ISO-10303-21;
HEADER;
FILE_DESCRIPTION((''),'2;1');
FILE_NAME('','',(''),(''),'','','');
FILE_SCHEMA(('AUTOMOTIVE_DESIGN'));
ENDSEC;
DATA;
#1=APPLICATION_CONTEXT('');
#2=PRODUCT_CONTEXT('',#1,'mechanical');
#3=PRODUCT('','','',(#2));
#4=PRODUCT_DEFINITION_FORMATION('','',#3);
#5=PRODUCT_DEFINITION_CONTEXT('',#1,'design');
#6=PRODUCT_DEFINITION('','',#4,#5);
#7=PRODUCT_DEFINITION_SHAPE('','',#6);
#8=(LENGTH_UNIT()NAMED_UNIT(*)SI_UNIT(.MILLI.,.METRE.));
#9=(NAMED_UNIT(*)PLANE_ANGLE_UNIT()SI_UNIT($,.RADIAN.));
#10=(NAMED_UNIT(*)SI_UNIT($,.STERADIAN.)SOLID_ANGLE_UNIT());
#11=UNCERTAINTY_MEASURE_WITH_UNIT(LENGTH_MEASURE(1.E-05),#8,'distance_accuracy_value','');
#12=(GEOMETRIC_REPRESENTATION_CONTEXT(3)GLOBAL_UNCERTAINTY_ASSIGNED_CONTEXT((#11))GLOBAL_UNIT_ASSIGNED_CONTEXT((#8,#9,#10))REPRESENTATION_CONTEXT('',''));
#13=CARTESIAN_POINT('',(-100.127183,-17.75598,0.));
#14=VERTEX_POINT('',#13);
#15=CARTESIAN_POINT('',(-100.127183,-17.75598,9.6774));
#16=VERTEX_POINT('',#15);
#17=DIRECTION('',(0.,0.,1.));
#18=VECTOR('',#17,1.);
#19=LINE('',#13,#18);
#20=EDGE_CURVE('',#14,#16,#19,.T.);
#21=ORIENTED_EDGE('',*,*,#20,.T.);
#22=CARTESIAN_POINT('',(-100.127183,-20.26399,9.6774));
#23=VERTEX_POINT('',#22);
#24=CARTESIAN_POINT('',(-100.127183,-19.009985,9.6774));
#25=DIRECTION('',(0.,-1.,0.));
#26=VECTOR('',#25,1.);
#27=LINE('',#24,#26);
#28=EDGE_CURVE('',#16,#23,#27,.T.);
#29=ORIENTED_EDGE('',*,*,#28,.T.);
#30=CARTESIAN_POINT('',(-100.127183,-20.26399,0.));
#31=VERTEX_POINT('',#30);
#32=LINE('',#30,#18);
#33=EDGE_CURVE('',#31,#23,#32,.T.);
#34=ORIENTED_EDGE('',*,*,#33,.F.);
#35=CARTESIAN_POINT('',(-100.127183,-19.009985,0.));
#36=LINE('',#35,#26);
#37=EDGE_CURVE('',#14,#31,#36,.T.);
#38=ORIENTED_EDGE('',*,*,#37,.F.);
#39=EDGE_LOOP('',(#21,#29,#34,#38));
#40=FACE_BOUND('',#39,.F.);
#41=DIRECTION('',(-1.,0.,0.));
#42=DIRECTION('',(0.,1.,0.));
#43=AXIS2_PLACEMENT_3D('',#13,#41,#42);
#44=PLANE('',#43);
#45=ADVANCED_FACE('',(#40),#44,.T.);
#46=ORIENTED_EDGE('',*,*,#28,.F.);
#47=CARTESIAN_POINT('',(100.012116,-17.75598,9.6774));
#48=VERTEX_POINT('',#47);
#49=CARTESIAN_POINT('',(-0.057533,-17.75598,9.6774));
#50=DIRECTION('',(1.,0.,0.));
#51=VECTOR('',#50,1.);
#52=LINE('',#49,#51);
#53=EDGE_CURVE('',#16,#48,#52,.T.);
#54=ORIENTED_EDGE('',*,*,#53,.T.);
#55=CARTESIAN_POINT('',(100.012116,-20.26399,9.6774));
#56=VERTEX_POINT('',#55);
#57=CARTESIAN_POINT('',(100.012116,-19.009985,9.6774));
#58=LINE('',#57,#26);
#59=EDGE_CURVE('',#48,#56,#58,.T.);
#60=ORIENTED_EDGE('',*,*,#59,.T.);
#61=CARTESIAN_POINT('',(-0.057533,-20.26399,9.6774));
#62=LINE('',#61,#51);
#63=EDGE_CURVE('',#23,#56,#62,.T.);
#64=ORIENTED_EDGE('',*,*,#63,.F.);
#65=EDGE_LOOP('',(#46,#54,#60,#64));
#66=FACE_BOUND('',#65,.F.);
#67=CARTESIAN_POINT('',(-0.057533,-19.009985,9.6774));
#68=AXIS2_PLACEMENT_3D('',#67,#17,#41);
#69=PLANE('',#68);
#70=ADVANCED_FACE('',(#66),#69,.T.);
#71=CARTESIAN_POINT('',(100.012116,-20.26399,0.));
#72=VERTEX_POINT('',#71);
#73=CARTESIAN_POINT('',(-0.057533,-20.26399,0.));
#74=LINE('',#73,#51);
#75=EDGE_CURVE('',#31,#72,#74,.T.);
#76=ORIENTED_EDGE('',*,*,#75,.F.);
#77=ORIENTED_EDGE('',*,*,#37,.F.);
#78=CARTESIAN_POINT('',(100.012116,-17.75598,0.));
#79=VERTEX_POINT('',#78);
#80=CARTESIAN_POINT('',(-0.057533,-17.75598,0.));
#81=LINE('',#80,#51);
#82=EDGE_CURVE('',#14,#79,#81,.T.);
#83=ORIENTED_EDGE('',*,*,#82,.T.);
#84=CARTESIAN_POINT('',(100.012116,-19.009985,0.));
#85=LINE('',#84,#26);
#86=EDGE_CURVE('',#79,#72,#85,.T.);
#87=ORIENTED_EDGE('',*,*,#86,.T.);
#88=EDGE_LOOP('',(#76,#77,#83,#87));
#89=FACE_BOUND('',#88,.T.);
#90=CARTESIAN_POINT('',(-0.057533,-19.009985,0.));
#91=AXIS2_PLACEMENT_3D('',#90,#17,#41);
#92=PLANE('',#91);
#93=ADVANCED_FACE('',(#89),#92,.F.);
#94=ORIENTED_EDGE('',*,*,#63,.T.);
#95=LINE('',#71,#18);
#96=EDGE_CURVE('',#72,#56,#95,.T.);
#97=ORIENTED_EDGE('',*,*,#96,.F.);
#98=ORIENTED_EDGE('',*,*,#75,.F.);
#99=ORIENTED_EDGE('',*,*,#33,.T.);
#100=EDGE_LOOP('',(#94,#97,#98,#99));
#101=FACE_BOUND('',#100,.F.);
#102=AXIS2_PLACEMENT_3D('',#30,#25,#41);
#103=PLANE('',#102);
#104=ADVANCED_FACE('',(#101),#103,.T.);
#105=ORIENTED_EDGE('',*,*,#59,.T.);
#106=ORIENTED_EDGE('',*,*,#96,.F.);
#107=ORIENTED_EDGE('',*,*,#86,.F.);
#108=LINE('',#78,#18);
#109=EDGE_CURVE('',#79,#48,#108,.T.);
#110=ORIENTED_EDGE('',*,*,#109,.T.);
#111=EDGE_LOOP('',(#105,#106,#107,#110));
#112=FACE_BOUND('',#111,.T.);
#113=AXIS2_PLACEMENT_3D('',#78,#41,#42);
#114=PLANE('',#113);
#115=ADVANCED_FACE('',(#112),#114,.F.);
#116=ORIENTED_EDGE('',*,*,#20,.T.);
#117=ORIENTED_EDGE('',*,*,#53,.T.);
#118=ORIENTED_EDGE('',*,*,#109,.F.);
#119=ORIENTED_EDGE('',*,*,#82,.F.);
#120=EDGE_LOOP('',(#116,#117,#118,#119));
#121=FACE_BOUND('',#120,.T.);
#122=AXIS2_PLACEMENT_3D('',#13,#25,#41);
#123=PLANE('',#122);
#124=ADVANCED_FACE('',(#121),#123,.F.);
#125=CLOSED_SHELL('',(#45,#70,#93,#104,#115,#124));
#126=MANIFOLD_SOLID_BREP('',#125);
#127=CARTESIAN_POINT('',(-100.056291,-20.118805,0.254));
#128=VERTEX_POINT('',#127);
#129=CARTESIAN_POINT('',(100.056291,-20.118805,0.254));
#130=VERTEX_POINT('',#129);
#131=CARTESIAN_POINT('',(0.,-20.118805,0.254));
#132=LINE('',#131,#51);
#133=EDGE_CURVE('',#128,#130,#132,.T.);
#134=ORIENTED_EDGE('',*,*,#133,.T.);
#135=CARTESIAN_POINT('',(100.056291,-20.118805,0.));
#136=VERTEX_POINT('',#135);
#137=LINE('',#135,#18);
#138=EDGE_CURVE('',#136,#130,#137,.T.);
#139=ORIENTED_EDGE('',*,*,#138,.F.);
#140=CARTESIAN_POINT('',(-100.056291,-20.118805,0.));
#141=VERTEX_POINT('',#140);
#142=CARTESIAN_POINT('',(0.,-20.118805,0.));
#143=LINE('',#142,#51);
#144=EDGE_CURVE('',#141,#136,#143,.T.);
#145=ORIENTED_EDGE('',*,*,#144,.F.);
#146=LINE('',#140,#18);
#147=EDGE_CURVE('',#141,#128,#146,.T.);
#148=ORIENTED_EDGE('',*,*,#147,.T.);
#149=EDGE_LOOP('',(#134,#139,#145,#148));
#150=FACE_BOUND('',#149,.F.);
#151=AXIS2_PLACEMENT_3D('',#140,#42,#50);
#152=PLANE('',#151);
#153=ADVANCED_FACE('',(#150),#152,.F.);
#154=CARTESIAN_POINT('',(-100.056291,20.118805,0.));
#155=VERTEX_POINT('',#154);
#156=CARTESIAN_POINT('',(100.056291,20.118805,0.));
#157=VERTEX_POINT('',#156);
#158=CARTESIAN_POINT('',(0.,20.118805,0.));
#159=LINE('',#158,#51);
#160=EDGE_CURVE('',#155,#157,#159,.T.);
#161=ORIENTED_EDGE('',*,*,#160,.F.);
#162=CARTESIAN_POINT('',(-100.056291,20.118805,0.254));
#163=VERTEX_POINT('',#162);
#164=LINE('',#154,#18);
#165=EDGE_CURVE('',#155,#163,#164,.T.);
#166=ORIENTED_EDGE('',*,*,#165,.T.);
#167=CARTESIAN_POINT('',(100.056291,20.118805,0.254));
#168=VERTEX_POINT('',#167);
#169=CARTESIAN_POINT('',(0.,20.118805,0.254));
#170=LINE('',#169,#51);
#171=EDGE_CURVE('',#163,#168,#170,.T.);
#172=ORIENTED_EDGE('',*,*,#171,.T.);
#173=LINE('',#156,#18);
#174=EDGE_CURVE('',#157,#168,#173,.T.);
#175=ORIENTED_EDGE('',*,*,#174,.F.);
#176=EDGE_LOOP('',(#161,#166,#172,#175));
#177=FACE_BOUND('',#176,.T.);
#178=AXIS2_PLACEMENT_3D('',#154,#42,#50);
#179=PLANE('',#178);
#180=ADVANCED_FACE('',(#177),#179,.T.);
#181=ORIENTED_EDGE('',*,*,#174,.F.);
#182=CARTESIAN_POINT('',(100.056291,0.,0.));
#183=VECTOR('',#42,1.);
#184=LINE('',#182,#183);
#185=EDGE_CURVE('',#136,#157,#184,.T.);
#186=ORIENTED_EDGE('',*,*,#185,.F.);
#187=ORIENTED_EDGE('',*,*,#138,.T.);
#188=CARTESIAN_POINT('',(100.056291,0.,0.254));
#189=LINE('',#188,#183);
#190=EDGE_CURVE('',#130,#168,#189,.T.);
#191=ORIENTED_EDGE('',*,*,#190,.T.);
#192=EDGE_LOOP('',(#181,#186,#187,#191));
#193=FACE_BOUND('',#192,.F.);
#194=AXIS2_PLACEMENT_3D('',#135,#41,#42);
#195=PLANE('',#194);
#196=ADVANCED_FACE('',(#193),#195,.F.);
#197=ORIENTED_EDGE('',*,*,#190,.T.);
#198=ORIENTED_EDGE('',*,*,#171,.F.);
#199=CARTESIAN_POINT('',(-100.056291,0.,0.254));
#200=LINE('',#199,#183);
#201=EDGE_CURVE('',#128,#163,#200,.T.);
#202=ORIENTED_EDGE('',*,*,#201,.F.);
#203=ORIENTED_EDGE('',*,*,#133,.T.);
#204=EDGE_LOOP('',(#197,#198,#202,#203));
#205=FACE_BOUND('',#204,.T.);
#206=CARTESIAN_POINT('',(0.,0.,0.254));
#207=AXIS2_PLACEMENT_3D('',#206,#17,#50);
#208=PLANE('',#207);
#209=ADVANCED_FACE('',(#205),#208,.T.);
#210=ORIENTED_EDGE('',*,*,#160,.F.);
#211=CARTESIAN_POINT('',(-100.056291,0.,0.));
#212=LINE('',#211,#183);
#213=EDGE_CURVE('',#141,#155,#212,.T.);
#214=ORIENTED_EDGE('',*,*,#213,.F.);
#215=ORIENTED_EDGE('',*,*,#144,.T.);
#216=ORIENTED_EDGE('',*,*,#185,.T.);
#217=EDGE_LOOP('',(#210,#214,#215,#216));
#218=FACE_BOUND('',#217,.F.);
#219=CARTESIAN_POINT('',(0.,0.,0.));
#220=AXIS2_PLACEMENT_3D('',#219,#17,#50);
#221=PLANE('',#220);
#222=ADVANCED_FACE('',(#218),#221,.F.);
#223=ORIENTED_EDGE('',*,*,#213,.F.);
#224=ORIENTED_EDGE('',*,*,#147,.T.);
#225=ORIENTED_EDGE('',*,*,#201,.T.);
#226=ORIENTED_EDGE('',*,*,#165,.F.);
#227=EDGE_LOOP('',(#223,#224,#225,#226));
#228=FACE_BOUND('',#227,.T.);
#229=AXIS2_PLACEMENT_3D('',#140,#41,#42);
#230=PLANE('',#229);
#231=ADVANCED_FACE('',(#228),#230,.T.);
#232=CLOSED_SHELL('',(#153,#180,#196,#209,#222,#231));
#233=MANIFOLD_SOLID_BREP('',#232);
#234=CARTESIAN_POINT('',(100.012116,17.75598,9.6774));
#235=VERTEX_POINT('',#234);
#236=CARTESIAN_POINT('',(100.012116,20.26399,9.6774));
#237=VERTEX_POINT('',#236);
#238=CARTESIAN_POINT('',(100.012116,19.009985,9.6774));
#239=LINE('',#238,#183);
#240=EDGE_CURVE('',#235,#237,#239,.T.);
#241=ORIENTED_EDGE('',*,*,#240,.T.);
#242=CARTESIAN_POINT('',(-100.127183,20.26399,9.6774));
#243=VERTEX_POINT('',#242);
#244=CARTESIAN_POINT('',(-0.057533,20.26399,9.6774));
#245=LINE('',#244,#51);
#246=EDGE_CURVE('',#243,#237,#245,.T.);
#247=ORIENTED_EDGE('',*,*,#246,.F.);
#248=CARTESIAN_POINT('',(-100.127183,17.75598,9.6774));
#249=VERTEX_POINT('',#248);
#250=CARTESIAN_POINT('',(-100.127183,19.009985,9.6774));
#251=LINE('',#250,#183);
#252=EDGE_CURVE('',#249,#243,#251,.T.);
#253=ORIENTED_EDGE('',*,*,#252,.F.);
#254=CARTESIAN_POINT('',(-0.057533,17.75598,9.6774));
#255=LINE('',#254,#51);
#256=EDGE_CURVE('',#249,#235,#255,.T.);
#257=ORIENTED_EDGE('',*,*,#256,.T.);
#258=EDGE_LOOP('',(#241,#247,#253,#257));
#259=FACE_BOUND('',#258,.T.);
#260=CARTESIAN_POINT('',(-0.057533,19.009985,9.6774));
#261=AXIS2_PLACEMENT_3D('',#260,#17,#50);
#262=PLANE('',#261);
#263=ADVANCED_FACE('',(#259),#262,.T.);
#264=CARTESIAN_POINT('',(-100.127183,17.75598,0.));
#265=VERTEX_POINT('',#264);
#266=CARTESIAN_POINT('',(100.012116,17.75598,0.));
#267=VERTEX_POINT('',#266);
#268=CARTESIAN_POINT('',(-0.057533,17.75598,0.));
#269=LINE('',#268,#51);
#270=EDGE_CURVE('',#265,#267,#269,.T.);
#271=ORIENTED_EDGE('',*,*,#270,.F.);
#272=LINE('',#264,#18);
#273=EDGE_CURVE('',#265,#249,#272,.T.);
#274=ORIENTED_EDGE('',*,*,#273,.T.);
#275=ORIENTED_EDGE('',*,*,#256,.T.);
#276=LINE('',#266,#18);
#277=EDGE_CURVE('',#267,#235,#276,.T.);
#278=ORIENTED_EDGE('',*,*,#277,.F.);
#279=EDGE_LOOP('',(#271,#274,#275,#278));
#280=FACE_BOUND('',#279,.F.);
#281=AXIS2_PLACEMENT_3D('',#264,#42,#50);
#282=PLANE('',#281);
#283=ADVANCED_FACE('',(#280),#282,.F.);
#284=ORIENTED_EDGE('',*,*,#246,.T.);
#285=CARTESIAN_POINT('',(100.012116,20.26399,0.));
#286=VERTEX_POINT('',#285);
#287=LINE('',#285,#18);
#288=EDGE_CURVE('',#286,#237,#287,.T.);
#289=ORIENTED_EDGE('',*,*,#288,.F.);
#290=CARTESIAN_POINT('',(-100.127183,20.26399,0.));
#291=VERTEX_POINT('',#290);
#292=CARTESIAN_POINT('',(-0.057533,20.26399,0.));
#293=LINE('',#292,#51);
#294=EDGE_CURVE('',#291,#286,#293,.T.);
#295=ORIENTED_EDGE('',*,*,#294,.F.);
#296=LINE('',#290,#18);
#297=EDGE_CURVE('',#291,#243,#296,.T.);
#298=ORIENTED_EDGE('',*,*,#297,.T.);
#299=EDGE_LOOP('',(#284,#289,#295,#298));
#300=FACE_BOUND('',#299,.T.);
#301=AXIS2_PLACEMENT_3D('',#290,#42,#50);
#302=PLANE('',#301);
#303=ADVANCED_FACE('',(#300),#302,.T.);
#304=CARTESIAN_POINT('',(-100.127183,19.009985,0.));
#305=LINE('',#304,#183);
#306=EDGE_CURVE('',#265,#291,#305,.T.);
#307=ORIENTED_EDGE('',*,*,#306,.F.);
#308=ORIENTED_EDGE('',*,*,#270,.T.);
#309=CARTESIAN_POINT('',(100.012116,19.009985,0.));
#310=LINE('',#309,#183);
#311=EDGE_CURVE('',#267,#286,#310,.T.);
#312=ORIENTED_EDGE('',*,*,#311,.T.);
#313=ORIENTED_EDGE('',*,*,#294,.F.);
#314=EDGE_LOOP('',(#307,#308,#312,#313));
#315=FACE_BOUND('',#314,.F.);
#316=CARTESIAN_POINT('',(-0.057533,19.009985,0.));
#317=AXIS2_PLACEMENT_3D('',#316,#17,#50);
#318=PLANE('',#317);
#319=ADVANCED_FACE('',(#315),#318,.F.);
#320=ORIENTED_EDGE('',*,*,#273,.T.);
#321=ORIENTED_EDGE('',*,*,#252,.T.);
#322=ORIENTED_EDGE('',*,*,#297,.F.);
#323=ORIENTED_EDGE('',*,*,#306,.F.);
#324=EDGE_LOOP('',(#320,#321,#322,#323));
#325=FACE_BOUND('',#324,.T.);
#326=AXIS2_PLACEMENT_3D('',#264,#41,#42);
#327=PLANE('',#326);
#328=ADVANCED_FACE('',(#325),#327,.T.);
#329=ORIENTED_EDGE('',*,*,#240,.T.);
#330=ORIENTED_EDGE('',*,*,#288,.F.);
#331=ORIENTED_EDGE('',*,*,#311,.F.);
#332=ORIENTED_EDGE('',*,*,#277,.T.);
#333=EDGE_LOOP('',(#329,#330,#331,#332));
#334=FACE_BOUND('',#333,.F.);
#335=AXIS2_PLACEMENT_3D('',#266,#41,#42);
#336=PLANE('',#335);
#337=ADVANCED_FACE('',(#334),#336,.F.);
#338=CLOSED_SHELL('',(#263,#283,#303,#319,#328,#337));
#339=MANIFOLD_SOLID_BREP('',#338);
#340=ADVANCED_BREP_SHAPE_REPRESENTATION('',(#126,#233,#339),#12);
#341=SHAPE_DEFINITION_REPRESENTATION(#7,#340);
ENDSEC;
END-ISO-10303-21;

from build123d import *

# Parameters (mm, degrees)
F1_W     = 200.1392990351
F1_H     = 2.5080107152
F2_DEPTH = 9.6774
F0_W     = 200.1125812531
F0_H     = 40.237609297
F3_DEPTH = 0.254


# Not quite as in the source:
# - a feature names something its author has since deleted; it is built from what else it names


with BuildPart() as f2:
    # F1 (on Top) → F2 (new body)
    with BuildSketch(Plane.XY):
        with Locations((-0.0575333834, 19.0099850297)):
            Rectangle(F1_W, F1_H)
    extrude(amount=F2_DEPTH)


with BuildPart() as f3:
    # F0 (on Top) → F3 (new body)
    with BuildSketch(Plane.XY):
        Rectangle(F0_W, F0_H)
    extrude(amount=F3_DEPTH)


with BuildPart() as f4_1:
    # F4: instance of F2
    add(f2.part.mirror(Plane.XZ))


solid = Compound([f2.part, f3.part, f4_1.part])
